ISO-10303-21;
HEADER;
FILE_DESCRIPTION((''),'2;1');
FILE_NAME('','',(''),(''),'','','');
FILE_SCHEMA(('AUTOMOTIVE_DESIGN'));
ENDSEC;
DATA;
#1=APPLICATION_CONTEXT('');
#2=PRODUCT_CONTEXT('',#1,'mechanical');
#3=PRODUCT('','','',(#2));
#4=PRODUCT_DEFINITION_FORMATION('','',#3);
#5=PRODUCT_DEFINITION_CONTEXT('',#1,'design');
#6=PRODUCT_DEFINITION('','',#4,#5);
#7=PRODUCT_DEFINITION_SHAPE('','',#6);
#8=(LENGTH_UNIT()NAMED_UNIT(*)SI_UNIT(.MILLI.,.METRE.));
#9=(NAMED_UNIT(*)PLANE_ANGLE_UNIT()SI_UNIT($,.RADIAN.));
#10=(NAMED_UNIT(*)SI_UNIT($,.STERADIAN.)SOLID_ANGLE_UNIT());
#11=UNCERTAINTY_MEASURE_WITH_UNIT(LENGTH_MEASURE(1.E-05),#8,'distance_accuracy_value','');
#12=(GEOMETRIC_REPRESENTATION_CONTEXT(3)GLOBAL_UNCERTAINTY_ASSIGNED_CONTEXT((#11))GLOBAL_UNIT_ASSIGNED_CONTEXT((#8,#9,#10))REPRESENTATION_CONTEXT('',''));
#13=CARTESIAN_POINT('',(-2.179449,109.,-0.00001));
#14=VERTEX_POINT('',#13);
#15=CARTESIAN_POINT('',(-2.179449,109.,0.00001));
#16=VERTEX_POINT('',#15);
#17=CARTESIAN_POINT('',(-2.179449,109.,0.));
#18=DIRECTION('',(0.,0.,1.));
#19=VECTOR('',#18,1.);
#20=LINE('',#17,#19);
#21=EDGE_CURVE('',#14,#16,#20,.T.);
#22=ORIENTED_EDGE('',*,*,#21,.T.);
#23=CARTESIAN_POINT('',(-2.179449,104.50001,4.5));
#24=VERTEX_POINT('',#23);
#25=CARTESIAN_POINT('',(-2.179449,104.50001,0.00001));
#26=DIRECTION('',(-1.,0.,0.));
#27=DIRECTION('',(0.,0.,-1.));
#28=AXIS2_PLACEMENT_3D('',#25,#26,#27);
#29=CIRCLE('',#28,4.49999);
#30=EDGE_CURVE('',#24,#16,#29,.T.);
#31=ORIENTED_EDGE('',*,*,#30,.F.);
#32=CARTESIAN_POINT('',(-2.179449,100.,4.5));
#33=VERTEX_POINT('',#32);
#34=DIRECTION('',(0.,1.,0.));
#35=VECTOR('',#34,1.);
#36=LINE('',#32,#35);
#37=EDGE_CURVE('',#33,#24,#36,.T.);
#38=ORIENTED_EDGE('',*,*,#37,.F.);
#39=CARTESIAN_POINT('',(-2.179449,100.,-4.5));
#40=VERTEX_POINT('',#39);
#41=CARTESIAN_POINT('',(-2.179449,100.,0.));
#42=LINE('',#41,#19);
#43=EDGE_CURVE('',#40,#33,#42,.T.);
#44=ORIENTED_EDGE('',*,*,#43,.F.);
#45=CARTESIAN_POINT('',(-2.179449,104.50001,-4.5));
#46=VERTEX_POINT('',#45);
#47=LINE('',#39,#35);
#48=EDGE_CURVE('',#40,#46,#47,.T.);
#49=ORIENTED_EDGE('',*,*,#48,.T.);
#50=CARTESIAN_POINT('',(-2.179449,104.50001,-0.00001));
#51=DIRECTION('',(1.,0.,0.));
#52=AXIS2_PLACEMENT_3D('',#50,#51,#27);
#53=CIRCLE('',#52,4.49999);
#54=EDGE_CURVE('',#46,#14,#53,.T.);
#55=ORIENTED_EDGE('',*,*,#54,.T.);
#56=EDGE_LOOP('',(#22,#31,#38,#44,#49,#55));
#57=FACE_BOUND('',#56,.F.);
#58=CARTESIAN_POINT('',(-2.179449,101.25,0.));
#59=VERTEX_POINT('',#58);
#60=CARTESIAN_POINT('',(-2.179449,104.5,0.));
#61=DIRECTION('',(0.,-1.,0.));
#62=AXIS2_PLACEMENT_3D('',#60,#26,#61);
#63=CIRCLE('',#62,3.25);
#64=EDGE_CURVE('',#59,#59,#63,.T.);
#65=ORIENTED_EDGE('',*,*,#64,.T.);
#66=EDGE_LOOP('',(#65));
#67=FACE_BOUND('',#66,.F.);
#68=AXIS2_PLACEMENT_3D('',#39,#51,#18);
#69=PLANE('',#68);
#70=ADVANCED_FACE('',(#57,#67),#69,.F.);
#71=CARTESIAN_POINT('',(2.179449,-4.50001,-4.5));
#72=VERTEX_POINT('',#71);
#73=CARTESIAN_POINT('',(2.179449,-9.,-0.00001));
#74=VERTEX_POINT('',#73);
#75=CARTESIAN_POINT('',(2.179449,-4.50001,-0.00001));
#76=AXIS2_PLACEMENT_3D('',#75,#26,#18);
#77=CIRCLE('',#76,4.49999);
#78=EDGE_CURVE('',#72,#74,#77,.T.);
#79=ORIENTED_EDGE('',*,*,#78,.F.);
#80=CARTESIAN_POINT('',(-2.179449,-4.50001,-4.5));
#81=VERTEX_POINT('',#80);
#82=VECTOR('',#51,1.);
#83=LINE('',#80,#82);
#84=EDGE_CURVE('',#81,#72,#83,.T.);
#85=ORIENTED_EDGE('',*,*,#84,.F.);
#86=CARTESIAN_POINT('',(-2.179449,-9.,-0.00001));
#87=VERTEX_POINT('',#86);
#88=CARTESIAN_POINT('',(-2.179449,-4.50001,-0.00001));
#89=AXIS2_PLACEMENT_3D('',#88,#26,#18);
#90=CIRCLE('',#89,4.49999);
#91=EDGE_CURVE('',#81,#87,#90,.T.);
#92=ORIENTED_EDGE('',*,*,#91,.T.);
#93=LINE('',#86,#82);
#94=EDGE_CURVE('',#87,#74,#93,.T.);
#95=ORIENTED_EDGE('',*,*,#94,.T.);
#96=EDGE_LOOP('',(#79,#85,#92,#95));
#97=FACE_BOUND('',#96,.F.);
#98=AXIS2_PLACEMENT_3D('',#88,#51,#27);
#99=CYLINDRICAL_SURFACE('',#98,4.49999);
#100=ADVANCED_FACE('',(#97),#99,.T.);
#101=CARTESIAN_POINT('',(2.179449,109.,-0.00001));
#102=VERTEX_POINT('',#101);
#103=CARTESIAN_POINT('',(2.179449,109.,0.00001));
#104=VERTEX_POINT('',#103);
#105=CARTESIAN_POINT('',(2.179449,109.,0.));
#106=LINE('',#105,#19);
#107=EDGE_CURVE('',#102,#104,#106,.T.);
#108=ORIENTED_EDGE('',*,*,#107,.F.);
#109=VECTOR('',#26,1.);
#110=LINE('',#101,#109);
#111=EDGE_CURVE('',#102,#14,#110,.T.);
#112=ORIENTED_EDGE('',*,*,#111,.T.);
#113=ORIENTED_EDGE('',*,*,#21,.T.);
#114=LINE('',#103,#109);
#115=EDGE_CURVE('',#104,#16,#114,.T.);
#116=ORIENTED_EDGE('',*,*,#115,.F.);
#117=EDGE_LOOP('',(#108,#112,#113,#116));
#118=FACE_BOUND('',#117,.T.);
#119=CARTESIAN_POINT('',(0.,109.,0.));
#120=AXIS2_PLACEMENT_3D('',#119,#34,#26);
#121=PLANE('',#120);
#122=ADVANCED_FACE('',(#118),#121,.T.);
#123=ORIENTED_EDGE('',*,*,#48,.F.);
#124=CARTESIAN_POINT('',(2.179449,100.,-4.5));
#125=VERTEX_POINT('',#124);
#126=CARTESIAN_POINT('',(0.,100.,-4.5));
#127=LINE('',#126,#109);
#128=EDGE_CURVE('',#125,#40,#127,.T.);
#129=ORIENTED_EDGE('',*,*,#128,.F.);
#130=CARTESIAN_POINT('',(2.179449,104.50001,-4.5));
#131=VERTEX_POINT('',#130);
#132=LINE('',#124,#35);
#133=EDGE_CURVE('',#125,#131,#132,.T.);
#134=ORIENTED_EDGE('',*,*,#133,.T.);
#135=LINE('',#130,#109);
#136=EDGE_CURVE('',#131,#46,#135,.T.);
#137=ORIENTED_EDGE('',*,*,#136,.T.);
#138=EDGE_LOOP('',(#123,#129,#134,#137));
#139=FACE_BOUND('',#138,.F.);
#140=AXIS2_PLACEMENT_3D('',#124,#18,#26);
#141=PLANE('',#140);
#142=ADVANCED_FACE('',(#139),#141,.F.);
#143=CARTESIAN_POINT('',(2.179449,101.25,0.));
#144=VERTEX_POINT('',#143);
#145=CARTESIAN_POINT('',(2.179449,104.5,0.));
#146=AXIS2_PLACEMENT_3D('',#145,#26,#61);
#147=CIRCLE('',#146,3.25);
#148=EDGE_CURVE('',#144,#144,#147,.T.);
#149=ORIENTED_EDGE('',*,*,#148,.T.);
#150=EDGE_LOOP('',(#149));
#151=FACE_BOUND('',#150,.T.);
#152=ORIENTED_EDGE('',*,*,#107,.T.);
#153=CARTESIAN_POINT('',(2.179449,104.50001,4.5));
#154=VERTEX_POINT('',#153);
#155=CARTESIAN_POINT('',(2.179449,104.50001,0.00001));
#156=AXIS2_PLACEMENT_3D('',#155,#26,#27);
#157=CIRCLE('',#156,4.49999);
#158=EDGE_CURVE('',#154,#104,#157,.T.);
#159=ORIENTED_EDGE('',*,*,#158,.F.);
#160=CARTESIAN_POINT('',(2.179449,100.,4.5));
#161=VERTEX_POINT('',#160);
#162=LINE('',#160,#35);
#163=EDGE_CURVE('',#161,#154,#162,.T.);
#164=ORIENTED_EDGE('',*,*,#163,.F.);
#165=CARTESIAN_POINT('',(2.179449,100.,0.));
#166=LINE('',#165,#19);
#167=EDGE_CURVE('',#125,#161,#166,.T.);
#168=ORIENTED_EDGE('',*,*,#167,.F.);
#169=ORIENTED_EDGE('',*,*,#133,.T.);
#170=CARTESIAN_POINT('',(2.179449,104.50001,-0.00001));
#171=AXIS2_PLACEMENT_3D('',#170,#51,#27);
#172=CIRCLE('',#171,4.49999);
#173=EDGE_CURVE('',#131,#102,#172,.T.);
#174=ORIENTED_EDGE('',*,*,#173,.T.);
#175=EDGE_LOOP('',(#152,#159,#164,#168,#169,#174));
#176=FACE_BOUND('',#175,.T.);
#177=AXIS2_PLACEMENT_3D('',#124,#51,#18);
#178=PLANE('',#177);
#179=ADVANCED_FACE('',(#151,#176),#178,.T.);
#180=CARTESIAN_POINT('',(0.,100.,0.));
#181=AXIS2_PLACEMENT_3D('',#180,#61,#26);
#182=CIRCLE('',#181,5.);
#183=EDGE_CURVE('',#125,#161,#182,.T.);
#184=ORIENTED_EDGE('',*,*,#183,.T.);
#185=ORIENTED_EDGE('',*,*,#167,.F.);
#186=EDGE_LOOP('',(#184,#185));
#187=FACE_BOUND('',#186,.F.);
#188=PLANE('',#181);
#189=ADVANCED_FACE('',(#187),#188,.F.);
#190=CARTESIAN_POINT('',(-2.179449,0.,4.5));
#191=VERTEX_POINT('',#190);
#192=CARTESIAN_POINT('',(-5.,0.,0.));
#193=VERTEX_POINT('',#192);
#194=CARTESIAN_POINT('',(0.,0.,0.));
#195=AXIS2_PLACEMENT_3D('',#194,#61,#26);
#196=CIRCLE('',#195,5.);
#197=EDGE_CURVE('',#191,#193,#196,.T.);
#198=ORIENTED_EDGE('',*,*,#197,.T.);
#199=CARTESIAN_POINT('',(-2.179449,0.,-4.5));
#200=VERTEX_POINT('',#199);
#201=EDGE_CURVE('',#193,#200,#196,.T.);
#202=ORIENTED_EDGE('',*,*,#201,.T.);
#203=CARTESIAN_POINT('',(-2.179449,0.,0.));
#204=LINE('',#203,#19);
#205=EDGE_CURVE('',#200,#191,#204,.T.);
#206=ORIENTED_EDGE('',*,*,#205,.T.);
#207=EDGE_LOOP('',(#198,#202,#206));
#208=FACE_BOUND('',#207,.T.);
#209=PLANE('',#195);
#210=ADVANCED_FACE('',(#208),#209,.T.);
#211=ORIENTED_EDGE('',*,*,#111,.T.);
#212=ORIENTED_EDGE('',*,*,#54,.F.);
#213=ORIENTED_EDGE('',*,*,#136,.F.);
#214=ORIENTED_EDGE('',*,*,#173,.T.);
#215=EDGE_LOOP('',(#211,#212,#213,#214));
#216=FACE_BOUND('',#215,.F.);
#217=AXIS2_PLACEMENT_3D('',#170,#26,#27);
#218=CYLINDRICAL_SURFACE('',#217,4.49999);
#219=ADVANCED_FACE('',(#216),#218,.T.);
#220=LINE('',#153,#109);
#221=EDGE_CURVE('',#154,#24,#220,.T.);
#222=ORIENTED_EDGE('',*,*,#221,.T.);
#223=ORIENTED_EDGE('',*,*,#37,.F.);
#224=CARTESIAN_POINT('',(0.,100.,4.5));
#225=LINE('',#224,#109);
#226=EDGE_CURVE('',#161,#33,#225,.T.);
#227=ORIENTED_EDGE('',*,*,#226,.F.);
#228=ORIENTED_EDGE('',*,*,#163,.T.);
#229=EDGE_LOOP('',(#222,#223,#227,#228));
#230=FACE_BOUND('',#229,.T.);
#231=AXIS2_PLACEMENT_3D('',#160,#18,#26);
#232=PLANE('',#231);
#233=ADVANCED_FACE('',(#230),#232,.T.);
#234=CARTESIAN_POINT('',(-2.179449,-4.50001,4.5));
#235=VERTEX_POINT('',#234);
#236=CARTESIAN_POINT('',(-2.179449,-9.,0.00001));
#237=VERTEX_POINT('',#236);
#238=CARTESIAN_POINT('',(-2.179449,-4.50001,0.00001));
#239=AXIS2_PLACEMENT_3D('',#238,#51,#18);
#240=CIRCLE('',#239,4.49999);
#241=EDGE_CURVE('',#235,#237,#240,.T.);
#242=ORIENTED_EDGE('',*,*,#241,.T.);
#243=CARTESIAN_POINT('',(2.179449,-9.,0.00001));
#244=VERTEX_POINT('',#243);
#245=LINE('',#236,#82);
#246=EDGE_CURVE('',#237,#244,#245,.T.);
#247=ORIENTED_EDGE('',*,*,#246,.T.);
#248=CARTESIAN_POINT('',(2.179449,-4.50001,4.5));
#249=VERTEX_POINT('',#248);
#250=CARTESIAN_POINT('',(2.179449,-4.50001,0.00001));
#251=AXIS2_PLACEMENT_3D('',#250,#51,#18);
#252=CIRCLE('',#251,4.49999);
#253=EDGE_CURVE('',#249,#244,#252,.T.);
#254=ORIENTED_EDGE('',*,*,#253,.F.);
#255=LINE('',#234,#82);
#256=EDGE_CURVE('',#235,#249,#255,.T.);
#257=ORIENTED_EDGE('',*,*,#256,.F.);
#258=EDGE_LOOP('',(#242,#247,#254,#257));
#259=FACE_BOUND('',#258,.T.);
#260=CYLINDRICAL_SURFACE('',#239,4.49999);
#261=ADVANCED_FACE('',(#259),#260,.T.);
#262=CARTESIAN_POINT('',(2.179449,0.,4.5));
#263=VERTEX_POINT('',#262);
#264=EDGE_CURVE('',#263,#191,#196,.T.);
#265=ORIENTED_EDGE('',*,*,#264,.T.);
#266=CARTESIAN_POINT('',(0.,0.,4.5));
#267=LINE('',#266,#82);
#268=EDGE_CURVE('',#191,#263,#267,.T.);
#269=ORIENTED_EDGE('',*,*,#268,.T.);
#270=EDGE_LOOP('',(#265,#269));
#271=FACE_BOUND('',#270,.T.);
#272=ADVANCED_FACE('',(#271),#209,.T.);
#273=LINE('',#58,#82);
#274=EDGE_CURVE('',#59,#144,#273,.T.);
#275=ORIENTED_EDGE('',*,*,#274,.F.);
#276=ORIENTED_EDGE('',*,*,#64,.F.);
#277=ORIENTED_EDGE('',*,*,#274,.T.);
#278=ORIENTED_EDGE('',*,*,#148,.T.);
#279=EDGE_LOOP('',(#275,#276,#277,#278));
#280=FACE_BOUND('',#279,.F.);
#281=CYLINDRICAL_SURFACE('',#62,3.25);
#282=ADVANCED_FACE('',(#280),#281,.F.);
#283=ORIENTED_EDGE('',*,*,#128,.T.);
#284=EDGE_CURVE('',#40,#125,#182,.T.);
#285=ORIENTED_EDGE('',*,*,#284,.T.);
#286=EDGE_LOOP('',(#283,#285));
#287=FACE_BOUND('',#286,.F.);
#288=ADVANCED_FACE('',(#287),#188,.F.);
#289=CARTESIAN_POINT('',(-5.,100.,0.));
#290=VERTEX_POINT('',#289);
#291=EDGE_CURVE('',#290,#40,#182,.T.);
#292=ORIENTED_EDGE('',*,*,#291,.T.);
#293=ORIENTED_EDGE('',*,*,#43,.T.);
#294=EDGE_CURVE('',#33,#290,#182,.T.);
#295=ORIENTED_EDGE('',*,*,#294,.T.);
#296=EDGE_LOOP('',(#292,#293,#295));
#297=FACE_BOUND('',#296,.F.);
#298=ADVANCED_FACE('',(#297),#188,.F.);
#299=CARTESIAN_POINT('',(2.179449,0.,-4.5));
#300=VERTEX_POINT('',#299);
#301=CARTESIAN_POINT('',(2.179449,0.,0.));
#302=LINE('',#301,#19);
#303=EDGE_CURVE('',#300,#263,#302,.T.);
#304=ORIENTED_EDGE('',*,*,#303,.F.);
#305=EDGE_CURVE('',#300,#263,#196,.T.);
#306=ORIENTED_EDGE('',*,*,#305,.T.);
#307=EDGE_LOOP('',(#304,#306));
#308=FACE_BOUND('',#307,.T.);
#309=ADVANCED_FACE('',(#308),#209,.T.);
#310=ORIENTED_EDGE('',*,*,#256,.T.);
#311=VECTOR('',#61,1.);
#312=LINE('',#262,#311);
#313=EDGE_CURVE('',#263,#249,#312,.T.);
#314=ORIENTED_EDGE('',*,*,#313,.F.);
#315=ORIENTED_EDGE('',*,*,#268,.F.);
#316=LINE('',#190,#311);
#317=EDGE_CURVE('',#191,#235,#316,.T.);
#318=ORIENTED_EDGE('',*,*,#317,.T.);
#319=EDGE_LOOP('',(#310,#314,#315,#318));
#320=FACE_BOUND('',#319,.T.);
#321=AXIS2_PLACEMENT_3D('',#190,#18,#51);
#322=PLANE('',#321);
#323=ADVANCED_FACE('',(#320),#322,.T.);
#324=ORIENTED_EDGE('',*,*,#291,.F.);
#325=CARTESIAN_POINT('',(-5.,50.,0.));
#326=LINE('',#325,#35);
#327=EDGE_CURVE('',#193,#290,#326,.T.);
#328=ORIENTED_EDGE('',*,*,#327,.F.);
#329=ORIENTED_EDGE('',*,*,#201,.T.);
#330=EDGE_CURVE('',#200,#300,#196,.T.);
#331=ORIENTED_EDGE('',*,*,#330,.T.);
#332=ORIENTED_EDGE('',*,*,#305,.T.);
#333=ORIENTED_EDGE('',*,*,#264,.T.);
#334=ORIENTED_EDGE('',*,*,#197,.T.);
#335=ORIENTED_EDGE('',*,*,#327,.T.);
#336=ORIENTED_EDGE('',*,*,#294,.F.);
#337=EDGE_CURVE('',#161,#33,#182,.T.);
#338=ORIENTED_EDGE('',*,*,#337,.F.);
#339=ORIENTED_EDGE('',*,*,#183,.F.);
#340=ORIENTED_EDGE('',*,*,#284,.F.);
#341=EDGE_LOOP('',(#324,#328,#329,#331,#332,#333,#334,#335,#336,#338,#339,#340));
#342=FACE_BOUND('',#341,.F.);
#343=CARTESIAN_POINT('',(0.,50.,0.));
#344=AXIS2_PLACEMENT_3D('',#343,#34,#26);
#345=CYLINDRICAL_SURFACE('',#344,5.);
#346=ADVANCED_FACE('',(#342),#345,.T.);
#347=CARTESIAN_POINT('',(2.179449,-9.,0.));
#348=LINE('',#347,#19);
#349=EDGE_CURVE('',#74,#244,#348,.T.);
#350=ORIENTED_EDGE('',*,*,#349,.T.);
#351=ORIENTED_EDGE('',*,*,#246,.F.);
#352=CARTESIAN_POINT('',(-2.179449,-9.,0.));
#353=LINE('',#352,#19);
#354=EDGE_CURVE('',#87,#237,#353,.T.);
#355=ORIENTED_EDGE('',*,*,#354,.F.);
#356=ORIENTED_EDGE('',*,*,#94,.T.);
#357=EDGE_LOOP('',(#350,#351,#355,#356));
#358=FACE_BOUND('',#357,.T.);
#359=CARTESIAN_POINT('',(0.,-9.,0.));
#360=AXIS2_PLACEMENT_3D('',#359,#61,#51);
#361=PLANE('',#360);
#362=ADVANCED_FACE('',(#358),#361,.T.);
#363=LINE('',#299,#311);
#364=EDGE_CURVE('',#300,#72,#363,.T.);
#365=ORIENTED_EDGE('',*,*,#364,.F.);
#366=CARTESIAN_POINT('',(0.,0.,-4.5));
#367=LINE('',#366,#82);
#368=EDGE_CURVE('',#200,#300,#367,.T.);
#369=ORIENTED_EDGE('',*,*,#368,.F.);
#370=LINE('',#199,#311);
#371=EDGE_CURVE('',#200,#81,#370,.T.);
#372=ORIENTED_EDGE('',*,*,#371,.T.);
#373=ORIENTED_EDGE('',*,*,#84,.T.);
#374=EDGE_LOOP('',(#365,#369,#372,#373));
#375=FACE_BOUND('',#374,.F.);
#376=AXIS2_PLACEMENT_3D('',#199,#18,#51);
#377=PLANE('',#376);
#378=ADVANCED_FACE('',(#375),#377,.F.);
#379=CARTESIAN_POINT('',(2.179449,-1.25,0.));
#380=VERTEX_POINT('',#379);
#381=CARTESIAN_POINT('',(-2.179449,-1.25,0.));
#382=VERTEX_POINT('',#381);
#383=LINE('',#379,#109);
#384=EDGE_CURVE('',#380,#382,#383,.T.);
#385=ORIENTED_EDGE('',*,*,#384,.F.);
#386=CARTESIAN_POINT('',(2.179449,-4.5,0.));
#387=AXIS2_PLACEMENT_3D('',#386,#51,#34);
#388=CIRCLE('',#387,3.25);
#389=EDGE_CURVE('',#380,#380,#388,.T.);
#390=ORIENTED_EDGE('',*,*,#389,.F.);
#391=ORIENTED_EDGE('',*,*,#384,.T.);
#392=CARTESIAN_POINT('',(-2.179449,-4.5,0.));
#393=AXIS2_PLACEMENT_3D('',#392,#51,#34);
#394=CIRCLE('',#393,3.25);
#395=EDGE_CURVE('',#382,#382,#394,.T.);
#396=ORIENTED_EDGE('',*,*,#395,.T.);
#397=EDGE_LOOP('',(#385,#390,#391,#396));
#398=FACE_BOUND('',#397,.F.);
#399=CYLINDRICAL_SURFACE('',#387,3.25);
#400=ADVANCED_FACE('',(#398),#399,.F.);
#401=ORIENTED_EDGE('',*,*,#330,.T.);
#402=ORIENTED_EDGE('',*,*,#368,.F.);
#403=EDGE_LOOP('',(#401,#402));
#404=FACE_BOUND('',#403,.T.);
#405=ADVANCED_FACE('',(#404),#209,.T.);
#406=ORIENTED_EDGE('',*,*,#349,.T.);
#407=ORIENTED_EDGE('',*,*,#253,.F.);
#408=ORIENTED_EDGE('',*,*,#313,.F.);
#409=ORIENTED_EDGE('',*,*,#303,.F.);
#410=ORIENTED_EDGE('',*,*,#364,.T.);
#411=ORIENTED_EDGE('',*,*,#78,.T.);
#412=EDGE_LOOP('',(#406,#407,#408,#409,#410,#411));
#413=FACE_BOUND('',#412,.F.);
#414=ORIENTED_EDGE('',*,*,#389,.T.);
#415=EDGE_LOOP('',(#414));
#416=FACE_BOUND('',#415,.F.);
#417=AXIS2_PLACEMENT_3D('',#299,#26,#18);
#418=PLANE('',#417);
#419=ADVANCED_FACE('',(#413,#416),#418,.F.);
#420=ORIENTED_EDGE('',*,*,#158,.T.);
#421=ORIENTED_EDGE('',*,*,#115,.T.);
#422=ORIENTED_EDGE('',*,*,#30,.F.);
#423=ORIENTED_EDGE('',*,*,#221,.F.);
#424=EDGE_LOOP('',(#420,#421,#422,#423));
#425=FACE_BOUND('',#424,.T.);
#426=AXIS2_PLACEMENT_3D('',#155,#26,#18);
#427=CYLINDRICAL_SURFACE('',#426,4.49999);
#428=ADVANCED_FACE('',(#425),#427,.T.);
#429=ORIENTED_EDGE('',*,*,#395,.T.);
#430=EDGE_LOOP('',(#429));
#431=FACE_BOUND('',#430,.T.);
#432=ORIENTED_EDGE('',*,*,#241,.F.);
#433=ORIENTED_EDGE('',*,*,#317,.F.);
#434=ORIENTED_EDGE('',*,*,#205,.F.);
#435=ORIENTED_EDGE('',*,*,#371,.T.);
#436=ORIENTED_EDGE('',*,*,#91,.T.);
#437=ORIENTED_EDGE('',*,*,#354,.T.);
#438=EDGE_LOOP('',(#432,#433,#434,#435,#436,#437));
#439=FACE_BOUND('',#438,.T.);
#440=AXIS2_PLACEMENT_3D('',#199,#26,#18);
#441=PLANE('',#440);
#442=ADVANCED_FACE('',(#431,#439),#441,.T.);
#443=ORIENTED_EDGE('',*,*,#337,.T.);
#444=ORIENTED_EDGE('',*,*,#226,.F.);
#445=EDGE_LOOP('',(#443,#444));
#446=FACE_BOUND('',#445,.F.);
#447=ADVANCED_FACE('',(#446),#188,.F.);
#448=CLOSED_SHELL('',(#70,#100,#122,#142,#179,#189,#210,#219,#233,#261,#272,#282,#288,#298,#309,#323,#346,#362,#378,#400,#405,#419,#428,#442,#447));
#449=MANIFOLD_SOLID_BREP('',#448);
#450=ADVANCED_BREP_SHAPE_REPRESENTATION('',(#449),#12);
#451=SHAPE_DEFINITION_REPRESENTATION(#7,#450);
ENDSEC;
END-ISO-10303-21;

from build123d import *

# Parameters (mm, degrees)
F0_W      = 5
F0_H      = 100
F2_W      = 4.3588989435
F2_H      = 9
F3_DEPTH  = 9
F4_R      = 3.25
F5_DEPTH  = 5
F6_R      = 4.49999
F7_W      = 4.3588989435
F7_H      = 9
F8_DEPTH  = 9
F9_R      = 3.25
F10_DEPTH = 5
F11_R     = 4.49999


# Not quite as in the source:
# - a fillet or chamfer is up to 0.001 mm smaller than in the source, because OpenCascade refuses the exact size


with BuildPart() as f1:
    # F0 (on Top) → F1 (revolve)
    with BuildSketch(Plane.XY):
        with Locations((-2.5, 50)):
            Rectangle(F0_W, F0_H)
    revolve(axis=Axis((0, 50, 0), (0, -1, 0)))

    # F2 (on face) → F3 (join)
    with BuildSketch(Plane.XZ):
        Rectangle(F2_W, F2_H)
    extrude(amount=F3_DEPTH)

    # F4 (on face) → F5 (cut)
    with BuildSketch(Plane.YZ.offset(2.1794494718)):
        with Locations((-4.5, 0)):
            Circle(F4_R)
    extrude(amount=-F5_DEPTH, mode=Mode.SUBTRACT)

    # F6 (radius 4.5 in the source; OpenCascade refuses exactly that, so slightly less here)
    f6_edges = [f1.edges().sort_by_distance(p)[0] for p in [
        (0, -9, 4.5),
        (0, -9, -4.5),
    ]]
    fillet(f6_edges, radius=F6_R)

    # F7 (on face) → F8 (join)
    with BuildSketch(Plane(origin=(0, 100, 0), x_dir=(-1, 0, 0), z_dir=(0, 1, 0))):
        Rectangle(F7_W, F7_H)
    extrude(amount=F8_DEPTH)

    # F9 (on face) → F10 (cut)
    with BuildSketch(Plane(origin=(-2.1794494718, 0, 0), x_dir=(0, -1, 0), z_dir=(-1, 0, 0))):
        with Locations((-104.5, 0)):
            Circle(F9_R)
    extrude(amount=-F10_DEPTH, mode=Mode.SUBTRACT)

    # F11 (radius 4.5 in the source; OpenCascade refuses exactly that, so slightly less here)
    f11_edges = [f1.edges().sort_by_distance(p)[0] for p in [
        (0, 109, 4.5),
        (0, 109, -4.5),
    ]]
    fillet(f11_edges, radius=F11_R)


solid = f1.part
